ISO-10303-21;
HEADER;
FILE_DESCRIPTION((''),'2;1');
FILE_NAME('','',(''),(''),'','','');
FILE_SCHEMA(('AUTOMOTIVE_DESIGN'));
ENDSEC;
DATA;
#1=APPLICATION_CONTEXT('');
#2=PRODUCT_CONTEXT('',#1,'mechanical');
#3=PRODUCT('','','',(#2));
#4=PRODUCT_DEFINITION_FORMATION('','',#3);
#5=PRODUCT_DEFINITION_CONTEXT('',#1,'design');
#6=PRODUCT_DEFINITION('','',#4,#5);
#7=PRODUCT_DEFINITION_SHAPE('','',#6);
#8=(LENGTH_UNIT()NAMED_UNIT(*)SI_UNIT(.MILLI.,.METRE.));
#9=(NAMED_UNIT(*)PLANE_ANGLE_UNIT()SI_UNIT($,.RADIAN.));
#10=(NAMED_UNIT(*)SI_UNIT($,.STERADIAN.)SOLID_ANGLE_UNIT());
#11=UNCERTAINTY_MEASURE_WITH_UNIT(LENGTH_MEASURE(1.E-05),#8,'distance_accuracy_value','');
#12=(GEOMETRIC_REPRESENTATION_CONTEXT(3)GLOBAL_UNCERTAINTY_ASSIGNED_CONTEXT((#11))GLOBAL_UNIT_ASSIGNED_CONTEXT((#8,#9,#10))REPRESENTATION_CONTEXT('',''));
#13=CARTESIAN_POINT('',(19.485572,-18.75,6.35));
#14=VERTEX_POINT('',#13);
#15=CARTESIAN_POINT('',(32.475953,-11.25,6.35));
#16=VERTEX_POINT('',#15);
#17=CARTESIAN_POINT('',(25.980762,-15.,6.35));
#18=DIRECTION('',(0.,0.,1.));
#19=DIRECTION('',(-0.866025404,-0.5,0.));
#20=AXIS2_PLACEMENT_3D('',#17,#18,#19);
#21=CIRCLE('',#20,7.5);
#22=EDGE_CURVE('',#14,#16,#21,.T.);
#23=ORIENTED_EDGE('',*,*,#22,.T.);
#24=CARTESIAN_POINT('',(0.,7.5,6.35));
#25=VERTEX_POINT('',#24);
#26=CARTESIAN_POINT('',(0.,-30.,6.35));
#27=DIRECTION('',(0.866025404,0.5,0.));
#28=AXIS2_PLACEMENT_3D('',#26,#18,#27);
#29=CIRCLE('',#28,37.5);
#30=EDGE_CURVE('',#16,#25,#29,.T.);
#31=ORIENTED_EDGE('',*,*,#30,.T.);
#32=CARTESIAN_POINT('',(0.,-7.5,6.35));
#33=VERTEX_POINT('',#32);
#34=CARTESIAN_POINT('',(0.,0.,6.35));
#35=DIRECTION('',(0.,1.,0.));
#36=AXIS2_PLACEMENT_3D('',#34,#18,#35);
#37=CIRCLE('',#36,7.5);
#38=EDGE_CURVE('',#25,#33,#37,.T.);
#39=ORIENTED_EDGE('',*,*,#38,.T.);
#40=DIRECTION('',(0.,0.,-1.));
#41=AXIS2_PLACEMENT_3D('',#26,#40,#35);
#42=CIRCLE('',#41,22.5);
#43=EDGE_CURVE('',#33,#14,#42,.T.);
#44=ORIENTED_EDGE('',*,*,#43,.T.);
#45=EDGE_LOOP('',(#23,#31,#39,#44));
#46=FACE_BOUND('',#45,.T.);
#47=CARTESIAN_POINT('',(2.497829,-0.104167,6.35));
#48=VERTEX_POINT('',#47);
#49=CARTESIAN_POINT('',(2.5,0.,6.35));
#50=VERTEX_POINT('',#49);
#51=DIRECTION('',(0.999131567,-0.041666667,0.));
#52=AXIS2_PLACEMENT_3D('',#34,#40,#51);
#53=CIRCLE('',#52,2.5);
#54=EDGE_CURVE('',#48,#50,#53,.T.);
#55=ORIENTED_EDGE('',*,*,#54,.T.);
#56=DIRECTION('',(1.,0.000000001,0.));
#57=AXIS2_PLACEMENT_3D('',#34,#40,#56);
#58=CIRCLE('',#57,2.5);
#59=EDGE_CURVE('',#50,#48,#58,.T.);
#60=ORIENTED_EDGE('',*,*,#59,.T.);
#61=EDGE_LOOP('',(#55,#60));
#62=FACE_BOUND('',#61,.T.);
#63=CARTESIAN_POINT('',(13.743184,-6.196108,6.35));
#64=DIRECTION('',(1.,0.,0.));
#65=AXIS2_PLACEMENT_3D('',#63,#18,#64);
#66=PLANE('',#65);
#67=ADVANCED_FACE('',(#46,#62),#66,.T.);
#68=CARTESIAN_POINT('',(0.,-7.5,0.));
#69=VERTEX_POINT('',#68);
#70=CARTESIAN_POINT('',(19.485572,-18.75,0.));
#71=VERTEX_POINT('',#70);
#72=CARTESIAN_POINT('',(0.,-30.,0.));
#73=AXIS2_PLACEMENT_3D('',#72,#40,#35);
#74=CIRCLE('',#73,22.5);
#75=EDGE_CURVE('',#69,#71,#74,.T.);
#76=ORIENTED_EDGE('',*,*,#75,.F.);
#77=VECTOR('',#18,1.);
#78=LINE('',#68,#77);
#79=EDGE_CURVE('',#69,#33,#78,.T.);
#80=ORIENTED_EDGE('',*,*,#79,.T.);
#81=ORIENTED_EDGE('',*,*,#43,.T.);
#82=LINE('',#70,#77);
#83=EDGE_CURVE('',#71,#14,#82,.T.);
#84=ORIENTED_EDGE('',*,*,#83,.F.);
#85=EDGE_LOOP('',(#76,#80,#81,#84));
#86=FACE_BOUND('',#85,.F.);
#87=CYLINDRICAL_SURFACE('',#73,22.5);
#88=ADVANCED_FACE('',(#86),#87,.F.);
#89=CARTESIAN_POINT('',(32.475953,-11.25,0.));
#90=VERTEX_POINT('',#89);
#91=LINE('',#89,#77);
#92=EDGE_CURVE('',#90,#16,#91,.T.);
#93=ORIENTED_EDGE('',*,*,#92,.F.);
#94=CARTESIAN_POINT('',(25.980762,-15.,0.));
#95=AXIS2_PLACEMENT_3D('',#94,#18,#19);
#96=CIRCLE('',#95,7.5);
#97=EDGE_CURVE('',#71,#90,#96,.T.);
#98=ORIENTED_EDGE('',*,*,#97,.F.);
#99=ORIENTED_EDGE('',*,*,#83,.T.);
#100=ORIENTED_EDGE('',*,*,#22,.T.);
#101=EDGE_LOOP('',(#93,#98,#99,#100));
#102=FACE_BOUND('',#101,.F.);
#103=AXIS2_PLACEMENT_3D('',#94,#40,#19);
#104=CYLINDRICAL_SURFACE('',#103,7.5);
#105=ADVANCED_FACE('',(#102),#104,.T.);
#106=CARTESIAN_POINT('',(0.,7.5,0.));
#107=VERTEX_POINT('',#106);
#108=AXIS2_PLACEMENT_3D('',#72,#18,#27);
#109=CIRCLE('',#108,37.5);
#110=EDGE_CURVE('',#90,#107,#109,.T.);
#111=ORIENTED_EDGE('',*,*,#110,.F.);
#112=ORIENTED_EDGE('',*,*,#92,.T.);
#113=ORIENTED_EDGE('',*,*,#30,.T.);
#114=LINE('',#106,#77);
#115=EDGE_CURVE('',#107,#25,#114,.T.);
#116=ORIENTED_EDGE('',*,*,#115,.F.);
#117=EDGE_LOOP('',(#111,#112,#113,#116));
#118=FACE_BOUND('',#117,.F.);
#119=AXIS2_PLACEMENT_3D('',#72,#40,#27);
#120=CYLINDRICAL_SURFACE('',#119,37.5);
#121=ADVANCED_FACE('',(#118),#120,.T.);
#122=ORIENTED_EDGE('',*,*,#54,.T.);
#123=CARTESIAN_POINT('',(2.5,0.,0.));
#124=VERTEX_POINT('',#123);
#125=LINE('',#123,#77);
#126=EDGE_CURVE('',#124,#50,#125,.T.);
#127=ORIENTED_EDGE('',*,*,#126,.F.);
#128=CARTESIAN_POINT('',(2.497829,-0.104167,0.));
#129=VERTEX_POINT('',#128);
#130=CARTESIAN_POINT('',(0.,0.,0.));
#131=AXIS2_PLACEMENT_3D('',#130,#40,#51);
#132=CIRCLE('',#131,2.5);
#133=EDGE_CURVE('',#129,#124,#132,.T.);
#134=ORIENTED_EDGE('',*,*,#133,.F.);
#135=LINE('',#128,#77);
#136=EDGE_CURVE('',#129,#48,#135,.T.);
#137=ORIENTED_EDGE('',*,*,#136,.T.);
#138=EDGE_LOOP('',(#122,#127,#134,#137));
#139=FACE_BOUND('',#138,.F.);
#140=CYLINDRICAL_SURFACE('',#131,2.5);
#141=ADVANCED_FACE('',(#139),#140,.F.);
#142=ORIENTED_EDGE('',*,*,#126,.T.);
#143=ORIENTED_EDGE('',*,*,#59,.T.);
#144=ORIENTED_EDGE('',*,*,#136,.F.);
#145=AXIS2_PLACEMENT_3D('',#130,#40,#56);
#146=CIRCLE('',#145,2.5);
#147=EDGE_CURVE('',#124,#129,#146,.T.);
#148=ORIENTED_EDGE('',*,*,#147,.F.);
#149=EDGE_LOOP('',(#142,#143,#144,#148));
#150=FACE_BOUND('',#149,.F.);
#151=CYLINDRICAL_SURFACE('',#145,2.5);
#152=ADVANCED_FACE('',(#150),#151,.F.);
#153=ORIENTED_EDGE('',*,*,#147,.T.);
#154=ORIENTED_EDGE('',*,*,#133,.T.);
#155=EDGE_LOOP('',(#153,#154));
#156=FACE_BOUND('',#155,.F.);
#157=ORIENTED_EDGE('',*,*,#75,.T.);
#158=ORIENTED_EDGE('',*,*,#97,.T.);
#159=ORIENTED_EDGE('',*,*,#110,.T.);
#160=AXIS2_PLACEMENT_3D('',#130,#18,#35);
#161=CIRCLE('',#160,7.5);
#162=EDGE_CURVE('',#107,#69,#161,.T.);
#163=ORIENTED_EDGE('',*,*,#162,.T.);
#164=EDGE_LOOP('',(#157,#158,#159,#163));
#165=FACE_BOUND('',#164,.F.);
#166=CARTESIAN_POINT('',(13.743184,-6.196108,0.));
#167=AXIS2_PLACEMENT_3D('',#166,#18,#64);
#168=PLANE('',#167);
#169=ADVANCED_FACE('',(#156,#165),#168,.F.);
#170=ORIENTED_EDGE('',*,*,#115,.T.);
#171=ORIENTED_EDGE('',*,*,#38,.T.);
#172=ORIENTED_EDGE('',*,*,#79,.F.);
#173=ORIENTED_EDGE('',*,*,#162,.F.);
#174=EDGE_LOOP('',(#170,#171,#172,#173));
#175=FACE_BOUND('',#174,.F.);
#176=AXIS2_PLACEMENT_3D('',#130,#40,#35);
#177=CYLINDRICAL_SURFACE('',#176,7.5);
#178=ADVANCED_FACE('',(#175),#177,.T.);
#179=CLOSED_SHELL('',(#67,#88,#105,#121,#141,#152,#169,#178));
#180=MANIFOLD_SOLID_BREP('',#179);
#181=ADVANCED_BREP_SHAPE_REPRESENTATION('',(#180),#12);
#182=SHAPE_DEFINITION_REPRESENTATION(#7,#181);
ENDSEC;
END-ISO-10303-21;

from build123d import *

# Parameters (mm, degrees)
F1_DEPTH = 6.35


# Not quite as in the source:
# - a length typed as a fraction of an inch, garbled in the dataset ("3 / 203.2 mm" for 3/8 in), is restored


with BuildPart() as f1:
    # F0 (on Top) → F1 (new body)
    with BuildSketch(Plane.XY):
        with BuildLine():
            ThreePointArc((0, 7.5), (-7.5, 0), (0, -7.5))
            ThreePointArc((0, -7.5), (11.25, -10.5144284149), (19.4855715851, -18.75))
            ThreePointArc((19.4855715851, -18.75), (29.7307621135, -21.4951905284), (32.4759526419, -11.25))
            ThreePointArc((32.4759526419, -11.25), (18.75, 2.4759526419), (0, 7.5))
        make_face()
        with BuildLine():
            ThreePointArc((2.4978289184, -0.1041666667), (-2.4994571707, 0.0520946447), (2.5, 0))
            ThreePointArc((2.5, 0), (2.4994571707, -0.0520946447), (2.4978289184, -0.1041666667))
        make_face(mode=Mode.SUBTRACT)
    extrude(amount=F1_DEPTH)


solid = f1.part
